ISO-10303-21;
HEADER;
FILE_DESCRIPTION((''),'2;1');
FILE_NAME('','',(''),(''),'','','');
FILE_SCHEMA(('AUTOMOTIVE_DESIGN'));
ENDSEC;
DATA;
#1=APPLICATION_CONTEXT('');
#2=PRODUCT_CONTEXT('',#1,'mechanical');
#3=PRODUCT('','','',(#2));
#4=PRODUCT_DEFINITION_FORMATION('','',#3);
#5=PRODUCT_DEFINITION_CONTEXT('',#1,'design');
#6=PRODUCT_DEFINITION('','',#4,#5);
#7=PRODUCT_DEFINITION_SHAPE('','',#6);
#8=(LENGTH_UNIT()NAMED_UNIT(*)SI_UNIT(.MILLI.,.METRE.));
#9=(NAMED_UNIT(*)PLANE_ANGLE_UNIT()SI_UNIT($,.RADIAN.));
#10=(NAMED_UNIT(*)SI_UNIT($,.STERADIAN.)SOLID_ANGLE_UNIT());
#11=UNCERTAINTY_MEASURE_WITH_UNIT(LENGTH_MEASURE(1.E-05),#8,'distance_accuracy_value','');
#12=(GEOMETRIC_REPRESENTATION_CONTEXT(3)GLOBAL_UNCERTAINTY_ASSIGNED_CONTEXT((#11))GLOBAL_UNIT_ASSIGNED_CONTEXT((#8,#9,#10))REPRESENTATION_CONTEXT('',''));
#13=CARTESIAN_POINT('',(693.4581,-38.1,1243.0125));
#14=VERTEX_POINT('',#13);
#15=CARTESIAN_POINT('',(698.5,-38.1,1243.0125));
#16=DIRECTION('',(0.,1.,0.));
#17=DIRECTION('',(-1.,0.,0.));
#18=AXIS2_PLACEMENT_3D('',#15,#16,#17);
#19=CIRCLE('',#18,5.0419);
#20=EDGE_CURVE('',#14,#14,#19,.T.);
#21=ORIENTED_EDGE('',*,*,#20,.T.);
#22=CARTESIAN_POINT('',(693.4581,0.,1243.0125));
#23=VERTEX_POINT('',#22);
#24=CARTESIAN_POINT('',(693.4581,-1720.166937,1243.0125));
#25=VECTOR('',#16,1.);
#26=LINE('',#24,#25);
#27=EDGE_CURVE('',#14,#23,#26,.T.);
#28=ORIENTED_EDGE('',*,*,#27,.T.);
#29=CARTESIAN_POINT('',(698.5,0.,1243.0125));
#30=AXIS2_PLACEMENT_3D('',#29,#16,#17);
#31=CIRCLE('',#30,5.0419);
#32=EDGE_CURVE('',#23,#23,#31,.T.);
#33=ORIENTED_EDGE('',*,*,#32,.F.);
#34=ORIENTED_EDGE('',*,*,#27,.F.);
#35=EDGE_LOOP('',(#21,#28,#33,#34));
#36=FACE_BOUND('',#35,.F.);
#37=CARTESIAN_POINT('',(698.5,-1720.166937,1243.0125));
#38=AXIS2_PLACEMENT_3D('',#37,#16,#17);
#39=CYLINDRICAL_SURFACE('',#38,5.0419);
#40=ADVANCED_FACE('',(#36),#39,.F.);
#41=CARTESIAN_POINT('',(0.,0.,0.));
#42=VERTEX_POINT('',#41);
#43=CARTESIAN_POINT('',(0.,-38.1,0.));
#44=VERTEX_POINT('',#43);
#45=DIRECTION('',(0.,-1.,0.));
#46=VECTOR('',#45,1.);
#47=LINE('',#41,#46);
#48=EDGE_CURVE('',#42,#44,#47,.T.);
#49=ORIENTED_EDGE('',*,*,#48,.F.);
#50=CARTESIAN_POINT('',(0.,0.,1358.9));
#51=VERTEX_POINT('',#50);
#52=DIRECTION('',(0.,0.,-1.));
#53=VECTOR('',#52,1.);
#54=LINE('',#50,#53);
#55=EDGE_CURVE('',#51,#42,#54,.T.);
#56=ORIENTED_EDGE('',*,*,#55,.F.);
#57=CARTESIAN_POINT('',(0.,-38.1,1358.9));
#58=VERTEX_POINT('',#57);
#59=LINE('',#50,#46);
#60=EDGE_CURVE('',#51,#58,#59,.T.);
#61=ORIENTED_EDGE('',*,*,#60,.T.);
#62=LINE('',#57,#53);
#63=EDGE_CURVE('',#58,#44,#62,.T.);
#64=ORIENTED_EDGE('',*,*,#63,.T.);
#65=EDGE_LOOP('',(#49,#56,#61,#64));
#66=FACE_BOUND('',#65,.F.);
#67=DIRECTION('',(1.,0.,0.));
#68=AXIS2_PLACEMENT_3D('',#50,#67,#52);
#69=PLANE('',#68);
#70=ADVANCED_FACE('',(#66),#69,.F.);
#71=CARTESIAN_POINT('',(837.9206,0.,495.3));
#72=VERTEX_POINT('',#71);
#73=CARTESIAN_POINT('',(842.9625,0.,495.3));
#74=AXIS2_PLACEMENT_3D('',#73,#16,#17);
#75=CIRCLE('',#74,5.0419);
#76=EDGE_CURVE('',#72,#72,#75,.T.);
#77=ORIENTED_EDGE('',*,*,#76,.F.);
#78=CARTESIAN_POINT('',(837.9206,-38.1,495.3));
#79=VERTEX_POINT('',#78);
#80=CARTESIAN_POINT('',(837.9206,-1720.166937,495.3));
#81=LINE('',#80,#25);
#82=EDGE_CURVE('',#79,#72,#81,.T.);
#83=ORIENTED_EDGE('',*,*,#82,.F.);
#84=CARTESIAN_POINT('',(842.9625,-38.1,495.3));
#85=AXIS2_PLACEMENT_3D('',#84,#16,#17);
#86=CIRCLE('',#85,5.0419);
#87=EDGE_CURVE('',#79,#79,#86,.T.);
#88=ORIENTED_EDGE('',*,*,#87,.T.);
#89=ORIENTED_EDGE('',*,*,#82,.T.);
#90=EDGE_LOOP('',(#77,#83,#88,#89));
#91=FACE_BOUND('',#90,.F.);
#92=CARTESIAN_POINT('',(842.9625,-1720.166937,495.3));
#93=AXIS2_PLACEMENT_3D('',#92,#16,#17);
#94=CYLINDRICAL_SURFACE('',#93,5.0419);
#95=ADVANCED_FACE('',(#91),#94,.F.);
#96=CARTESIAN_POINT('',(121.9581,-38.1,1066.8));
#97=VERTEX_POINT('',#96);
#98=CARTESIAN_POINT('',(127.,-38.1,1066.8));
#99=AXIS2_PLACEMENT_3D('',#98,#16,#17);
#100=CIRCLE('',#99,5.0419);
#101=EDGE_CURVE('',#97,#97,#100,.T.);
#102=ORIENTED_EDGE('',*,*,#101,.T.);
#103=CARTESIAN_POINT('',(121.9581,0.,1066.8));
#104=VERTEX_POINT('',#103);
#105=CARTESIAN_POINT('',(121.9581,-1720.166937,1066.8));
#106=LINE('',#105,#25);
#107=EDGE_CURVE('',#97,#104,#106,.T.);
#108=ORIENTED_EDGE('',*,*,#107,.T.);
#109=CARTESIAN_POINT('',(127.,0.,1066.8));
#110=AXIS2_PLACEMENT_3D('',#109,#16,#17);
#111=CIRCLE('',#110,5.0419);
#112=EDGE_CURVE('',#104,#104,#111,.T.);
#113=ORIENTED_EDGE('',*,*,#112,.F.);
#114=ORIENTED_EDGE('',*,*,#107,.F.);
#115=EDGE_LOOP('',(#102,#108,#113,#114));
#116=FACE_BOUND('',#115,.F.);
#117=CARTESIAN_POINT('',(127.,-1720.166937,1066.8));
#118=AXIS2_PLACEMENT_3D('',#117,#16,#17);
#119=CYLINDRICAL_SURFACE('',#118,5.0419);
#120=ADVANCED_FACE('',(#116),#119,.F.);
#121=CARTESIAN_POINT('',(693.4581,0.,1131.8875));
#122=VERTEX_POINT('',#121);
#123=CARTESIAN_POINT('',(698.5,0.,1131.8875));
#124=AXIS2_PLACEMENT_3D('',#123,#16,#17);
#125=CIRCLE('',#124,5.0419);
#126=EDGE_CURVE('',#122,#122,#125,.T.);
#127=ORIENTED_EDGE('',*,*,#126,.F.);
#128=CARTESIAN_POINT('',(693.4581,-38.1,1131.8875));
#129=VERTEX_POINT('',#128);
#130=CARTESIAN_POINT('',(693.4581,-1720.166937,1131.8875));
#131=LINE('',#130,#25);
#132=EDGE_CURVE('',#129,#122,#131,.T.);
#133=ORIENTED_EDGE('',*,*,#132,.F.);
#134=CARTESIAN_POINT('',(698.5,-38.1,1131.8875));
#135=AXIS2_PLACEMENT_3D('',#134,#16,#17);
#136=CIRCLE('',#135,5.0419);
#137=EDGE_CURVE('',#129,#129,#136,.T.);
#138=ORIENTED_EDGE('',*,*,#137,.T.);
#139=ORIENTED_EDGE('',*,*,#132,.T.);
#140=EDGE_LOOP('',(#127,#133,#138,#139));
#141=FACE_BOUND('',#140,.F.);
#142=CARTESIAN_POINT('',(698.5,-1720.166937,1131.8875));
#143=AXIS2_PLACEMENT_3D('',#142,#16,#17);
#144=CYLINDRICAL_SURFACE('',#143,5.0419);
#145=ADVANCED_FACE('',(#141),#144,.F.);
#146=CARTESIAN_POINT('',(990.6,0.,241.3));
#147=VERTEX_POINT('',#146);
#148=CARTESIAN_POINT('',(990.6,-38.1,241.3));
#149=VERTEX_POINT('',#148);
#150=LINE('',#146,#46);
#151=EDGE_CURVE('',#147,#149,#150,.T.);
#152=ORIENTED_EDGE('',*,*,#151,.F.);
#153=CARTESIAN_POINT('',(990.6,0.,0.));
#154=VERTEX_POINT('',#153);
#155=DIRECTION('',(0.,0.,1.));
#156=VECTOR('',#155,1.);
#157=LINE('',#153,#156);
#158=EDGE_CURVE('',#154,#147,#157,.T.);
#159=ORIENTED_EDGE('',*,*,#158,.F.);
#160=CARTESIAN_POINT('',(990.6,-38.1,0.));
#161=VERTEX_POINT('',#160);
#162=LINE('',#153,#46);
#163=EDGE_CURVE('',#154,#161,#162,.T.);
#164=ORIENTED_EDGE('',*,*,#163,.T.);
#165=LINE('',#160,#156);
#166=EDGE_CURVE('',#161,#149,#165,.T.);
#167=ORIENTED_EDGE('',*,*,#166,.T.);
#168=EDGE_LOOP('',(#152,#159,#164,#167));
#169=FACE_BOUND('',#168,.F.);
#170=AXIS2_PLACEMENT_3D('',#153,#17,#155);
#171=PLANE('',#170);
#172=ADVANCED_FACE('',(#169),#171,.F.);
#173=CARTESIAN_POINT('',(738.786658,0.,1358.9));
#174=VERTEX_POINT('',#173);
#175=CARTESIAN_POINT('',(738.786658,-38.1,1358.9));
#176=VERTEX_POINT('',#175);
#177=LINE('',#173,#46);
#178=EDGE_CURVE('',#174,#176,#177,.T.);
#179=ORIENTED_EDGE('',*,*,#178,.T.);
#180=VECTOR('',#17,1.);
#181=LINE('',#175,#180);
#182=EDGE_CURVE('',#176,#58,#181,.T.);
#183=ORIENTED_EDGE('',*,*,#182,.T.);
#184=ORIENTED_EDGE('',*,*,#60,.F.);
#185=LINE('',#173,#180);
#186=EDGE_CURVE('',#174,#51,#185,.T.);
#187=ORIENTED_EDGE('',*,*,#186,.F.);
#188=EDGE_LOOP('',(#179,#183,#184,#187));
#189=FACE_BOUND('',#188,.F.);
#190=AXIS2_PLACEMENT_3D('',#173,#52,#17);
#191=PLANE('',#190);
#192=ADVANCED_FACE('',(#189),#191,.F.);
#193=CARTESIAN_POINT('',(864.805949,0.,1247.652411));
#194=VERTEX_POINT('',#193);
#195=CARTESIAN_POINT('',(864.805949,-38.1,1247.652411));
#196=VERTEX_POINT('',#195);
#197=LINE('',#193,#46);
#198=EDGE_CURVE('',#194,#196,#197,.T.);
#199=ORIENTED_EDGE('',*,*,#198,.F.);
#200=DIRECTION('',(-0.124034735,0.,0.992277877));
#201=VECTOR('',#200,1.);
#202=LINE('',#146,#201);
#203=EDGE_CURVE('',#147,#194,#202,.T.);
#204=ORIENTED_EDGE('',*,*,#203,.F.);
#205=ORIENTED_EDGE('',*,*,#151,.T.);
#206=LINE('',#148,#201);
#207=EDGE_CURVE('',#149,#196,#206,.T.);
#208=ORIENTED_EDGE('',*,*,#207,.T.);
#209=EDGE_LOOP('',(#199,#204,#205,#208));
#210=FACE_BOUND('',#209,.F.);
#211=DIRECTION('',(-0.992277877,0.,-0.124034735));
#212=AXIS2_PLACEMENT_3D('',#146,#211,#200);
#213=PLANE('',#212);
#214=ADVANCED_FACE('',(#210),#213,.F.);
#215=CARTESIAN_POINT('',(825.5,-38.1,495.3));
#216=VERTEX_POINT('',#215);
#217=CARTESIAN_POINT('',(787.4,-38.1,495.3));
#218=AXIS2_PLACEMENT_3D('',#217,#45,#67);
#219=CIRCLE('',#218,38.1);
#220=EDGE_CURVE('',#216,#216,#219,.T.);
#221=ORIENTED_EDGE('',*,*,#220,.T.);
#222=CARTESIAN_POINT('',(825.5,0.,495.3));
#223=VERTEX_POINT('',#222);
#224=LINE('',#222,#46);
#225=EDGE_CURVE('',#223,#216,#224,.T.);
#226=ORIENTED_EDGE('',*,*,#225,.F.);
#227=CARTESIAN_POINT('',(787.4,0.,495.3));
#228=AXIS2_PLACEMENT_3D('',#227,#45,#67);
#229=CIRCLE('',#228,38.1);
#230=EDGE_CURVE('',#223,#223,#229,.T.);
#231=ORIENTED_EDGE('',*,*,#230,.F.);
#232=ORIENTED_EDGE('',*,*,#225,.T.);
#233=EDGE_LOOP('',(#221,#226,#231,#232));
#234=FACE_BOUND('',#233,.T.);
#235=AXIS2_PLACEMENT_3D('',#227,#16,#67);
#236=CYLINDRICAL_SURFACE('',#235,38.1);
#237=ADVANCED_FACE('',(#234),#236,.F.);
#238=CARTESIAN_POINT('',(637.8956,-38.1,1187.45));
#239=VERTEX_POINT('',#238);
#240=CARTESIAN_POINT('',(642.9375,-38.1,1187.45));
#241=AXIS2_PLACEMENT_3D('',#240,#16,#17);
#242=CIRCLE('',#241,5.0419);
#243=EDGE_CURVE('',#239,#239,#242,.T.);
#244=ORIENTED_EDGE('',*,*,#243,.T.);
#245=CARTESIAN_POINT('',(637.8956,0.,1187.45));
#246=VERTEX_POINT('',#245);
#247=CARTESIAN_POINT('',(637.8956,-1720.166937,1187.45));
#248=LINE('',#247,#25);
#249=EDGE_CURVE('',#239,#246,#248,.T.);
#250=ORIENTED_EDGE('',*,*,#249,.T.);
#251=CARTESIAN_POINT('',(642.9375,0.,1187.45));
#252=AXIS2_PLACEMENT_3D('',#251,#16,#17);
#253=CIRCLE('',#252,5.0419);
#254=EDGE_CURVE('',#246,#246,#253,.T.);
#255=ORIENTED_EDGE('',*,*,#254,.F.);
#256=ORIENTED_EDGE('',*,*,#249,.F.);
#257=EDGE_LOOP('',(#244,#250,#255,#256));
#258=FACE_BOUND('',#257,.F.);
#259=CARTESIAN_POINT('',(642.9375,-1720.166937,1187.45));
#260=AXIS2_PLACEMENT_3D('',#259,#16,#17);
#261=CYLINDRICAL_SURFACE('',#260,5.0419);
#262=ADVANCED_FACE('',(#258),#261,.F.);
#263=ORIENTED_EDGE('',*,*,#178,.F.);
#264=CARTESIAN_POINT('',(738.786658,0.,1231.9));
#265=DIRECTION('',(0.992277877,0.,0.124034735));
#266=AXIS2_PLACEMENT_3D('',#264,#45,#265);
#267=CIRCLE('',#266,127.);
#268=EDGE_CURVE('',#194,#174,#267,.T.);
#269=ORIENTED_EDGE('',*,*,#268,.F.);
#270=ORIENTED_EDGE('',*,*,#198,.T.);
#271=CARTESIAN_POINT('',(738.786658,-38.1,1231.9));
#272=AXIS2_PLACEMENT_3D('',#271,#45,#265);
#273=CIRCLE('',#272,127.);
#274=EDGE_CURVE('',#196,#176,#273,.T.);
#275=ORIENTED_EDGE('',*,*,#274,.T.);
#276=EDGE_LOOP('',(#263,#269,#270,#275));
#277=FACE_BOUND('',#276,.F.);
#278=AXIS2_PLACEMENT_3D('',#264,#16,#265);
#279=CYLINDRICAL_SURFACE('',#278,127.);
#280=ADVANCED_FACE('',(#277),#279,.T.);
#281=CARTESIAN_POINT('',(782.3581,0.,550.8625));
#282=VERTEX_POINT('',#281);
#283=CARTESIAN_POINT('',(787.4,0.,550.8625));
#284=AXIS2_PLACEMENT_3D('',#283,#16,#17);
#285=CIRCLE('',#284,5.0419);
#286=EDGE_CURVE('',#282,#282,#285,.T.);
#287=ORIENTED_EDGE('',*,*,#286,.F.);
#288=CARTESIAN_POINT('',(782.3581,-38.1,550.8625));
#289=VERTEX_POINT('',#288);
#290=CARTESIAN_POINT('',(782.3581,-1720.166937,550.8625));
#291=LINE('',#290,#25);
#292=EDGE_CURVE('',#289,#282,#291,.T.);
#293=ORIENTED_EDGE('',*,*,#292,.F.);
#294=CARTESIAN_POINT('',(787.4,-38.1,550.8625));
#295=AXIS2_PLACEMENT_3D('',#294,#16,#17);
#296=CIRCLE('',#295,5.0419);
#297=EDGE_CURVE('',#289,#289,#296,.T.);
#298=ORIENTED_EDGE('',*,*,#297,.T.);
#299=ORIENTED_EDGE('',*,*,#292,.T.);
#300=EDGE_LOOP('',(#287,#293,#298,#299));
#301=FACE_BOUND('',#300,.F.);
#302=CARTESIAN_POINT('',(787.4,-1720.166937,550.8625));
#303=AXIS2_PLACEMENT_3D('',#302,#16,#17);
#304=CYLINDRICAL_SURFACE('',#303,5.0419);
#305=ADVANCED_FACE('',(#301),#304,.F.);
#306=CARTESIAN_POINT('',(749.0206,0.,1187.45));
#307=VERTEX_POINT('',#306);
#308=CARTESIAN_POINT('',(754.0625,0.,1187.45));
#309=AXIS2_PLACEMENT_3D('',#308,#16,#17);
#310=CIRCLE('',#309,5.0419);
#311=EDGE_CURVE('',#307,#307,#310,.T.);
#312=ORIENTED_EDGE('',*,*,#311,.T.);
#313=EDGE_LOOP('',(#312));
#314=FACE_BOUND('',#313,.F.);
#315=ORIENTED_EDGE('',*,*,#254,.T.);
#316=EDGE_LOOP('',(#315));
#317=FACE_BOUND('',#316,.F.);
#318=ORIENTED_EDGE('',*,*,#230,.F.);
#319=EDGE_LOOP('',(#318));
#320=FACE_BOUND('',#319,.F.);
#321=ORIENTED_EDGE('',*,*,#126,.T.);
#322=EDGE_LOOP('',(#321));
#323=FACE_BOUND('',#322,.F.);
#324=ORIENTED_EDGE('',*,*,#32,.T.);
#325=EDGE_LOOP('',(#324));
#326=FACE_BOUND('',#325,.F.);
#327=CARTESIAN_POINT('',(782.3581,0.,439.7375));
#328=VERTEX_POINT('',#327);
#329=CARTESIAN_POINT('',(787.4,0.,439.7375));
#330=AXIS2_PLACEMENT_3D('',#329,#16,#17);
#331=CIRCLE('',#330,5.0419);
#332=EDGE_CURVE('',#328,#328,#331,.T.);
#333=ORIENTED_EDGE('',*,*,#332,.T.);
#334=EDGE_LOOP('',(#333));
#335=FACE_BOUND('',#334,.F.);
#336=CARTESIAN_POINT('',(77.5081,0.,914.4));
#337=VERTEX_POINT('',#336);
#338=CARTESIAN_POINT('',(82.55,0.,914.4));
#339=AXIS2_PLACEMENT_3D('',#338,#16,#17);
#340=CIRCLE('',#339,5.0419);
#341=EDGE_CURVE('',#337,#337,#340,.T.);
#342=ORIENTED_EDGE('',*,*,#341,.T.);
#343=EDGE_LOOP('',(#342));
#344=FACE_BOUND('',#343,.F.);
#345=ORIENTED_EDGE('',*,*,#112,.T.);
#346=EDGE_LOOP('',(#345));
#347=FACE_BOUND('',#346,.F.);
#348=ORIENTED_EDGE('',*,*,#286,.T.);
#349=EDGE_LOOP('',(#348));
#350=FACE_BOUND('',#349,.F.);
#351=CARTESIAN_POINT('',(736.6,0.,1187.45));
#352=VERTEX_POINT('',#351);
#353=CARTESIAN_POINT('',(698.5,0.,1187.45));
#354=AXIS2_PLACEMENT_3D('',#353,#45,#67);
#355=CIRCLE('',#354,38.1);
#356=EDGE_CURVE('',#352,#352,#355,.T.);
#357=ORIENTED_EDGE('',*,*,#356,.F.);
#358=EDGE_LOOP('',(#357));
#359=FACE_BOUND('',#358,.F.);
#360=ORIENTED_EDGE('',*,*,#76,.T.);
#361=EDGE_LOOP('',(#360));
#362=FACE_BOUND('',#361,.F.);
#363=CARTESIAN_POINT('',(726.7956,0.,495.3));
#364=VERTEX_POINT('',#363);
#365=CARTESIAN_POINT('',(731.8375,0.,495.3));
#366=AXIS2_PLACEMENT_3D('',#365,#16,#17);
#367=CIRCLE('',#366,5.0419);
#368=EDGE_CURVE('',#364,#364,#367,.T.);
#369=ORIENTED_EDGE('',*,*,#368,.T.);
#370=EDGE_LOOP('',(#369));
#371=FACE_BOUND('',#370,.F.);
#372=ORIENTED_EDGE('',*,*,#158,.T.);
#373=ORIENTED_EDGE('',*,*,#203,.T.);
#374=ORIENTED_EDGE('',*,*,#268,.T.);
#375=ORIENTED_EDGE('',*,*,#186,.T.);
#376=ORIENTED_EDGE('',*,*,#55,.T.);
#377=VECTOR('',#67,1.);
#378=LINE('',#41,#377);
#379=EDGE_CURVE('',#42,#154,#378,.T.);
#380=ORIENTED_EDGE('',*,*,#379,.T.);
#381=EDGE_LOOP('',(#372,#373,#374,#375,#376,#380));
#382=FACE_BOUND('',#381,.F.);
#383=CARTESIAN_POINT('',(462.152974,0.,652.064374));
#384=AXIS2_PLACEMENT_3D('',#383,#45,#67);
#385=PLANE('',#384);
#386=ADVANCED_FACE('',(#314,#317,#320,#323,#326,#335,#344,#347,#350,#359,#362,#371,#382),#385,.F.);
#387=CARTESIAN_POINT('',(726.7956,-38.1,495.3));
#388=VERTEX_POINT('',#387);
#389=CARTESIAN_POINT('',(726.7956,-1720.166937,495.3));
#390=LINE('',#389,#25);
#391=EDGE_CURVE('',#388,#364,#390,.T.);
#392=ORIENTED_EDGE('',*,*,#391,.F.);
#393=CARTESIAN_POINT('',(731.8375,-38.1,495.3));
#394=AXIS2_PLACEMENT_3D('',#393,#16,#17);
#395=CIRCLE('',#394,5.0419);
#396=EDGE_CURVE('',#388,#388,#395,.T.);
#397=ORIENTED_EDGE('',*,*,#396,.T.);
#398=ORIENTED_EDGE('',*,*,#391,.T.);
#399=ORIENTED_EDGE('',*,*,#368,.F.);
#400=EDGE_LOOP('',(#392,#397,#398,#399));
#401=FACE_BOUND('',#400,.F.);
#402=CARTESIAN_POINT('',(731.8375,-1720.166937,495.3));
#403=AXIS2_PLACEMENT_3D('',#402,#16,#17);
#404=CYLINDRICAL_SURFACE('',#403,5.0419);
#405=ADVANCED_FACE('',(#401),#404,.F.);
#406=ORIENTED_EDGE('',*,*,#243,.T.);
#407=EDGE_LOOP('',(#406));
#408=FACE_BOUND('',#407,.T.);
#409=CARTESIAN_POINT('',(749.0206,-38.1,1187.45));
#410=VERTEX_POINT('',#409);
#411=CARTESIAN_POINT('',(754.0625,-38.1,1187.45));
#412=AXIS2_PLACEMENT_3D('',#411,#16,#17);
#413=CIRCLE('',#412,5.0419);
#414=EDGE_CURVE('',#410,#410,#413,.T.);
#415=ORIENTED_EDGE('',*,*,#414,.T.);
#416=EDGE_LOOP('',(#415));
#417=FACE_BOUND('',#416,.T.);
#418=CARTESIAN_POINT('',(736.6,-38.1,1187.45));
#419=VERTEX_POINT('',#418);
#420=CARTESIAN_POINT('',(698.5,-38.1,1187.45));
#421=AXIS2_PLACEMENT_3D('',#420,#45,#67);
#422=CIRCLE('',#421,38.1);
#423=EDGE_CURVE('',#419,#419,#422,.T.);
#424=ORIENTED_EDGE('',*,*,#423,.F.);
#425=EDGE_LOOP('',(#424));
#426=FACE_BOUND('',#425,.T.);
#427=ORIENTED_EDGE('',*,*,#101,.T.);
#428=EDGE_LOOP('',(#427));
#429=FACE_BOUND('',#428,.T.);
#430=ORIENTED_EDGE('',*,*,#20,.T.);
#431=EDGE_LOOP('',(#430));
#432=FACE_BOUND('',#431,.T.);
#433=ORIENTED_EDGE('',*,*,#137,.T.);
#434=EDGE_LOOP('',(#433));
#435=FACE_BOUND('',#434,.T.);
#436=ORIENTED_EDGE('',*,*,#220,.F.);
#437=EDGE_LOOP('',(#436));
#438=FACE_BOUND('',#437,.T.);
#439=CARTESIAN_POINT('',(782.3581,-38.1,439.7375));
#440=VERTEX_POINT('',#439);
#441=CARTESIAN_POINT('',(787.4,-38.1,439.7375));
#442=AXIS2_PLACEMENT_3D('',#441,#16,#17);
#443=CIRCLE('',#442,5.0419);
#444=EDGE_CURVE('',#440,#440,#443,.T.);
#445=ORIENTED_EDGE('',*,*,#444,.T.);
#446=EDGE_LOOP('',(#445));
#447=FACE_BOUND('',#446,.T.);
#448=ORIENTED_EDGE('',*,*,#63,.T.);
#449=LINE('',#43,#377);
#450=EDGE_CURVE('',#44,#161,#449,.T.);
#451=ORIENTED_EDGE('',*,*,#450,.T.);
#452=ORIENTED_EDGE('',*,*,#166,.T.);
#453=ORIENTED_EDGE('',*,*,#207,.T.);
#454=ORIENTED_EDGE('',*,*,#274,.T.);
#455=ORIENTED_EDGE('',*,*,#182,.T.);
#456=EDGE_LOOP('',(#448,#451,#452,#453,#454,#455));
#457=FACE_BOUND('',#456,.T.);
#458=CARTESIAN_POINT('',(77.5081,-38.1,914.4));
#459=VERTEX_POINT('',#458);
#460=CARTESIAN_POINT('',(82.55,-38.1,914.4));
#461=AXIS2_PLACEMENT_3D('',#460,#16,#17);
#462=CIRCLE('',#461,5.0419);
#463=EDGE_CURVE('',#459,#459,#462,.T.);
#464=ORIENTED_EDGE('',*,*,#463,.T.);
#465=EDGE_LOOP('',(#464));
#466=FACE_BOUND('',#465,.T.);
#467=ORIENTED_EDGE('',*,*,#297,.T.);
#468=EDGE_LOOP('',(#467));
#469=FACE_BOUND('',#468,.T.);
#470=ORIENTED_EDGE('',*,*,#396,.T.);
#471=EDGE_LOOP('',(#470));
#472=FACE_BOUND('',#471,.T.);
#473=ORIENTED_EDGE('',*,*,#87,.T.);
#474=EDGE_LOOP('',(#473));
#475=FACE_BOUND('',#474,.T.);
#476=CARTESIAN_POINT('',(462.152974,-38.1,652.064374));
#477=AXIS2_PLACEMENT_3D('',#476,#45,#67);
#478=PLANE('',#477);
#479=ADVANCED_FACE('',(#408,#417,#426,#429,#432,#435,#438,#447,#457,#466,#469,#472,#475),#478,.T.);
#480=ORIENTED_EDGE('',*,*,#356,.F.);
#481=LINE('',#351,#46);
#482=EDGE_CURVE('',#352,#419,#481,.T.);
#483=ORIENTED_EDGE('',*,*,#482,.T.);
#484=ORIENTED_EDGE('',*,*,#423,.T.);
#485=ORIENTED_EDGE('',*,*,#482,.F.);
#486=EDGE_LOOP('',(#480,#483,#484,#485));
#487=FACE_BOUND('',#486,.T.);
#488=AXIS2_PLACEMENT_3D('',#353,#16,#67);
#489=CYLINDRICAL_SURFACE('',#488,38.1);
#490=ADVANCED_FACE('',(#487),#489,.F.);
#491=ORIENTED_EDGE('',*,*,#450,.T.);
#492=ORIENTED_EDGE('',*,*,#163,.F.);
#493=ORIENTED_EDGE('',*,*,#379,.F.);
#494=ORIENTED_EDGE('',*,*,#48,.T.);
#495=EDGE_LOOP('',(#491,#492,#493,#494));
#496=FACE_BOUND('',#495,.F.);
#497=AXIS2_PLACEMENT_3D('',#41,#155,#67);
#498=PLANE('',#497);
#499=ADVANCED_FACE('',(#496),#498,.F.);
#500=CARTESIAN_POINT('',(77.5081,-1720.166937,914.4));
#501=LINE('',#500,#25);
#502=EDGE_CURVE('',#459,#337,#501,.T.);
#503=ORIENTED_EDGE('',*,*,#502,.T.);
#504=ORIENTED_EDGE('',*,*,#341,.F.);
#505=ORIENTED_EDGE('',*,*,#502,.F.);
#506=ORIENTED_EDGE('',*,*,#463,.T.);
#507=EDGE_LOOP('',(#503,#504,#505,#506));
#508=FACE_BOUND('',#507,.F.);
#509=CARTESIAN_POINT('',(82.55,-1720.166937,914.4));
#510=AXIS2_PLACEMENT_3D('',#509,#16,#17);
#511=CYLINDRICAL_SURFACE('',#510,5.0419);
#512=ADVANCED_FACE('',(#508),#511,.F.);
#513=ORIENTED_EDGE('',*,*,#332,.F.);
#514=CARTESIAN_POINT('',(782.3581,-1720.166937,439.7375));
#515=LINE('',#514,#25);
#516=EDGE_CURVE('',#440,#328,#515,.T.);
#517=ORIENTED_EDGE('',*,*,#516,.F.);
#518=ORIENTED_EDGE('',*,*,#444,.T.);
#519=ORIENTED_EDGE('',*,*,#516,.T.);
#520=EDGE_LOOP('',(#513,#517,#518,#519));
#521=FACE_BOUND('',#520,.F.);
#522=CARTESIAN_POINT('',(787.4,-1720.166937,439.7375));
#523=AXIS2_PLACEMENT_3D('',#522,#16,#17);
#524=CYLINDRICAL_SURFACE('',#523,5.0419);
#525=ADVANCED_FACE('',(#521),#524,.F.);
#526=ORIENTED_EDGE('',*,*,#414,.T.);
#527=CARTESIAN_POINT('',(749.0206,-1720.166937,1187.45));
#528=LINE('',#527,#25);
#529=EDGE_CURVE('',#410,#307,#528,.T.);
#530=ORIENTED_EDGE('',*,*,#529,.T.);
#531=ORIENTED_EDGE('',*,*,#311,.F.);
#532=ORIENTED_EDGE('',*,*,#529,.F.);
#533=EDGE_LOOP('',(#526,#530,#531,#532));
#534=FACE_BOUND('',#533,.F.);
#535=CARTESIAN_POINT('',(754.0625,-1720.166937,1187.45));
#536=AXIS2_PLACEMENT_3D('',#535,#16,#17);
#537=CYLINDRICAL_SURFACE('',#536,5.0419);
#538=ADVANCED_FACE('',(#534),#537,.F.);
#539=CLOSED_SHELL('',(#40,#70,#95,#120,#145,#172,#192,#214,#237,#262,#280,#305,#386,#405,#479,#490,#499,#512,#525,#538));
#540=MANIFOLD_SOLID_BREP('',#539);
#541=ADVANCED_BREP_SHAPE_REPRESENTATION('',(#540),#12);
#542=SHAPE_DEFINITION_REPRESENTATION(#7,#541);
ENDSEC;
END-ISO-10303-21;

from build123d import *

# Parameters (mm, degrees)
F0_R     = 38.1
F1_DEPTH = 38.1
F3_D     = 10.0838


# Not quite as in the source:
# - a feature names something its author has since deleted; it is built from what else it names


with BuildPart() as f1:
    # F0 (on Front) → F1 (new body)
    with BuildSketch(Plane.XZ):
        with BuildLine():
            Line((0, 1358.9), (0, 0))
            Line((0, 0), (990.6, 0))
            Line((990.6, 0), (990.6, 241.3))
            Line((990.6, 241.3), (864.8059485884, 1247.6524112928))
            ThreePointArc((864.8059485884, 1247.6524112928), (822.8355837767, 1327.1091283286), (738.7866582458, 1358.9))
            Line((738.7866582458, 1358.9), (0, 1358.9))
        make_face()
        with Locations((787.4, 495.3)):
            Circle(F0_R, mode=Mode.SUBTRACT)
        with Locations((698.5, 1187.45)):
            Circle(F0_R, mode=Mode.SUBTRACT)
    extrude(amount=F1_DEPTH)

    # F3 (through all)
    with Locations(Plane.XZ.offset(38.1)):
        with Locations((82.55, 914.4), (127, 1066.8), (698.5, 1243.0125), (754.0625, 1187.45), (698.5, 1131.8875), (642.9375, 1187.45), (842.9625, 495.3), (787.4, 550.8625), (731.8375, 495.3), (787.4, 439.7375)):
            Hole(F3_D / 2)


solid = f1.part
